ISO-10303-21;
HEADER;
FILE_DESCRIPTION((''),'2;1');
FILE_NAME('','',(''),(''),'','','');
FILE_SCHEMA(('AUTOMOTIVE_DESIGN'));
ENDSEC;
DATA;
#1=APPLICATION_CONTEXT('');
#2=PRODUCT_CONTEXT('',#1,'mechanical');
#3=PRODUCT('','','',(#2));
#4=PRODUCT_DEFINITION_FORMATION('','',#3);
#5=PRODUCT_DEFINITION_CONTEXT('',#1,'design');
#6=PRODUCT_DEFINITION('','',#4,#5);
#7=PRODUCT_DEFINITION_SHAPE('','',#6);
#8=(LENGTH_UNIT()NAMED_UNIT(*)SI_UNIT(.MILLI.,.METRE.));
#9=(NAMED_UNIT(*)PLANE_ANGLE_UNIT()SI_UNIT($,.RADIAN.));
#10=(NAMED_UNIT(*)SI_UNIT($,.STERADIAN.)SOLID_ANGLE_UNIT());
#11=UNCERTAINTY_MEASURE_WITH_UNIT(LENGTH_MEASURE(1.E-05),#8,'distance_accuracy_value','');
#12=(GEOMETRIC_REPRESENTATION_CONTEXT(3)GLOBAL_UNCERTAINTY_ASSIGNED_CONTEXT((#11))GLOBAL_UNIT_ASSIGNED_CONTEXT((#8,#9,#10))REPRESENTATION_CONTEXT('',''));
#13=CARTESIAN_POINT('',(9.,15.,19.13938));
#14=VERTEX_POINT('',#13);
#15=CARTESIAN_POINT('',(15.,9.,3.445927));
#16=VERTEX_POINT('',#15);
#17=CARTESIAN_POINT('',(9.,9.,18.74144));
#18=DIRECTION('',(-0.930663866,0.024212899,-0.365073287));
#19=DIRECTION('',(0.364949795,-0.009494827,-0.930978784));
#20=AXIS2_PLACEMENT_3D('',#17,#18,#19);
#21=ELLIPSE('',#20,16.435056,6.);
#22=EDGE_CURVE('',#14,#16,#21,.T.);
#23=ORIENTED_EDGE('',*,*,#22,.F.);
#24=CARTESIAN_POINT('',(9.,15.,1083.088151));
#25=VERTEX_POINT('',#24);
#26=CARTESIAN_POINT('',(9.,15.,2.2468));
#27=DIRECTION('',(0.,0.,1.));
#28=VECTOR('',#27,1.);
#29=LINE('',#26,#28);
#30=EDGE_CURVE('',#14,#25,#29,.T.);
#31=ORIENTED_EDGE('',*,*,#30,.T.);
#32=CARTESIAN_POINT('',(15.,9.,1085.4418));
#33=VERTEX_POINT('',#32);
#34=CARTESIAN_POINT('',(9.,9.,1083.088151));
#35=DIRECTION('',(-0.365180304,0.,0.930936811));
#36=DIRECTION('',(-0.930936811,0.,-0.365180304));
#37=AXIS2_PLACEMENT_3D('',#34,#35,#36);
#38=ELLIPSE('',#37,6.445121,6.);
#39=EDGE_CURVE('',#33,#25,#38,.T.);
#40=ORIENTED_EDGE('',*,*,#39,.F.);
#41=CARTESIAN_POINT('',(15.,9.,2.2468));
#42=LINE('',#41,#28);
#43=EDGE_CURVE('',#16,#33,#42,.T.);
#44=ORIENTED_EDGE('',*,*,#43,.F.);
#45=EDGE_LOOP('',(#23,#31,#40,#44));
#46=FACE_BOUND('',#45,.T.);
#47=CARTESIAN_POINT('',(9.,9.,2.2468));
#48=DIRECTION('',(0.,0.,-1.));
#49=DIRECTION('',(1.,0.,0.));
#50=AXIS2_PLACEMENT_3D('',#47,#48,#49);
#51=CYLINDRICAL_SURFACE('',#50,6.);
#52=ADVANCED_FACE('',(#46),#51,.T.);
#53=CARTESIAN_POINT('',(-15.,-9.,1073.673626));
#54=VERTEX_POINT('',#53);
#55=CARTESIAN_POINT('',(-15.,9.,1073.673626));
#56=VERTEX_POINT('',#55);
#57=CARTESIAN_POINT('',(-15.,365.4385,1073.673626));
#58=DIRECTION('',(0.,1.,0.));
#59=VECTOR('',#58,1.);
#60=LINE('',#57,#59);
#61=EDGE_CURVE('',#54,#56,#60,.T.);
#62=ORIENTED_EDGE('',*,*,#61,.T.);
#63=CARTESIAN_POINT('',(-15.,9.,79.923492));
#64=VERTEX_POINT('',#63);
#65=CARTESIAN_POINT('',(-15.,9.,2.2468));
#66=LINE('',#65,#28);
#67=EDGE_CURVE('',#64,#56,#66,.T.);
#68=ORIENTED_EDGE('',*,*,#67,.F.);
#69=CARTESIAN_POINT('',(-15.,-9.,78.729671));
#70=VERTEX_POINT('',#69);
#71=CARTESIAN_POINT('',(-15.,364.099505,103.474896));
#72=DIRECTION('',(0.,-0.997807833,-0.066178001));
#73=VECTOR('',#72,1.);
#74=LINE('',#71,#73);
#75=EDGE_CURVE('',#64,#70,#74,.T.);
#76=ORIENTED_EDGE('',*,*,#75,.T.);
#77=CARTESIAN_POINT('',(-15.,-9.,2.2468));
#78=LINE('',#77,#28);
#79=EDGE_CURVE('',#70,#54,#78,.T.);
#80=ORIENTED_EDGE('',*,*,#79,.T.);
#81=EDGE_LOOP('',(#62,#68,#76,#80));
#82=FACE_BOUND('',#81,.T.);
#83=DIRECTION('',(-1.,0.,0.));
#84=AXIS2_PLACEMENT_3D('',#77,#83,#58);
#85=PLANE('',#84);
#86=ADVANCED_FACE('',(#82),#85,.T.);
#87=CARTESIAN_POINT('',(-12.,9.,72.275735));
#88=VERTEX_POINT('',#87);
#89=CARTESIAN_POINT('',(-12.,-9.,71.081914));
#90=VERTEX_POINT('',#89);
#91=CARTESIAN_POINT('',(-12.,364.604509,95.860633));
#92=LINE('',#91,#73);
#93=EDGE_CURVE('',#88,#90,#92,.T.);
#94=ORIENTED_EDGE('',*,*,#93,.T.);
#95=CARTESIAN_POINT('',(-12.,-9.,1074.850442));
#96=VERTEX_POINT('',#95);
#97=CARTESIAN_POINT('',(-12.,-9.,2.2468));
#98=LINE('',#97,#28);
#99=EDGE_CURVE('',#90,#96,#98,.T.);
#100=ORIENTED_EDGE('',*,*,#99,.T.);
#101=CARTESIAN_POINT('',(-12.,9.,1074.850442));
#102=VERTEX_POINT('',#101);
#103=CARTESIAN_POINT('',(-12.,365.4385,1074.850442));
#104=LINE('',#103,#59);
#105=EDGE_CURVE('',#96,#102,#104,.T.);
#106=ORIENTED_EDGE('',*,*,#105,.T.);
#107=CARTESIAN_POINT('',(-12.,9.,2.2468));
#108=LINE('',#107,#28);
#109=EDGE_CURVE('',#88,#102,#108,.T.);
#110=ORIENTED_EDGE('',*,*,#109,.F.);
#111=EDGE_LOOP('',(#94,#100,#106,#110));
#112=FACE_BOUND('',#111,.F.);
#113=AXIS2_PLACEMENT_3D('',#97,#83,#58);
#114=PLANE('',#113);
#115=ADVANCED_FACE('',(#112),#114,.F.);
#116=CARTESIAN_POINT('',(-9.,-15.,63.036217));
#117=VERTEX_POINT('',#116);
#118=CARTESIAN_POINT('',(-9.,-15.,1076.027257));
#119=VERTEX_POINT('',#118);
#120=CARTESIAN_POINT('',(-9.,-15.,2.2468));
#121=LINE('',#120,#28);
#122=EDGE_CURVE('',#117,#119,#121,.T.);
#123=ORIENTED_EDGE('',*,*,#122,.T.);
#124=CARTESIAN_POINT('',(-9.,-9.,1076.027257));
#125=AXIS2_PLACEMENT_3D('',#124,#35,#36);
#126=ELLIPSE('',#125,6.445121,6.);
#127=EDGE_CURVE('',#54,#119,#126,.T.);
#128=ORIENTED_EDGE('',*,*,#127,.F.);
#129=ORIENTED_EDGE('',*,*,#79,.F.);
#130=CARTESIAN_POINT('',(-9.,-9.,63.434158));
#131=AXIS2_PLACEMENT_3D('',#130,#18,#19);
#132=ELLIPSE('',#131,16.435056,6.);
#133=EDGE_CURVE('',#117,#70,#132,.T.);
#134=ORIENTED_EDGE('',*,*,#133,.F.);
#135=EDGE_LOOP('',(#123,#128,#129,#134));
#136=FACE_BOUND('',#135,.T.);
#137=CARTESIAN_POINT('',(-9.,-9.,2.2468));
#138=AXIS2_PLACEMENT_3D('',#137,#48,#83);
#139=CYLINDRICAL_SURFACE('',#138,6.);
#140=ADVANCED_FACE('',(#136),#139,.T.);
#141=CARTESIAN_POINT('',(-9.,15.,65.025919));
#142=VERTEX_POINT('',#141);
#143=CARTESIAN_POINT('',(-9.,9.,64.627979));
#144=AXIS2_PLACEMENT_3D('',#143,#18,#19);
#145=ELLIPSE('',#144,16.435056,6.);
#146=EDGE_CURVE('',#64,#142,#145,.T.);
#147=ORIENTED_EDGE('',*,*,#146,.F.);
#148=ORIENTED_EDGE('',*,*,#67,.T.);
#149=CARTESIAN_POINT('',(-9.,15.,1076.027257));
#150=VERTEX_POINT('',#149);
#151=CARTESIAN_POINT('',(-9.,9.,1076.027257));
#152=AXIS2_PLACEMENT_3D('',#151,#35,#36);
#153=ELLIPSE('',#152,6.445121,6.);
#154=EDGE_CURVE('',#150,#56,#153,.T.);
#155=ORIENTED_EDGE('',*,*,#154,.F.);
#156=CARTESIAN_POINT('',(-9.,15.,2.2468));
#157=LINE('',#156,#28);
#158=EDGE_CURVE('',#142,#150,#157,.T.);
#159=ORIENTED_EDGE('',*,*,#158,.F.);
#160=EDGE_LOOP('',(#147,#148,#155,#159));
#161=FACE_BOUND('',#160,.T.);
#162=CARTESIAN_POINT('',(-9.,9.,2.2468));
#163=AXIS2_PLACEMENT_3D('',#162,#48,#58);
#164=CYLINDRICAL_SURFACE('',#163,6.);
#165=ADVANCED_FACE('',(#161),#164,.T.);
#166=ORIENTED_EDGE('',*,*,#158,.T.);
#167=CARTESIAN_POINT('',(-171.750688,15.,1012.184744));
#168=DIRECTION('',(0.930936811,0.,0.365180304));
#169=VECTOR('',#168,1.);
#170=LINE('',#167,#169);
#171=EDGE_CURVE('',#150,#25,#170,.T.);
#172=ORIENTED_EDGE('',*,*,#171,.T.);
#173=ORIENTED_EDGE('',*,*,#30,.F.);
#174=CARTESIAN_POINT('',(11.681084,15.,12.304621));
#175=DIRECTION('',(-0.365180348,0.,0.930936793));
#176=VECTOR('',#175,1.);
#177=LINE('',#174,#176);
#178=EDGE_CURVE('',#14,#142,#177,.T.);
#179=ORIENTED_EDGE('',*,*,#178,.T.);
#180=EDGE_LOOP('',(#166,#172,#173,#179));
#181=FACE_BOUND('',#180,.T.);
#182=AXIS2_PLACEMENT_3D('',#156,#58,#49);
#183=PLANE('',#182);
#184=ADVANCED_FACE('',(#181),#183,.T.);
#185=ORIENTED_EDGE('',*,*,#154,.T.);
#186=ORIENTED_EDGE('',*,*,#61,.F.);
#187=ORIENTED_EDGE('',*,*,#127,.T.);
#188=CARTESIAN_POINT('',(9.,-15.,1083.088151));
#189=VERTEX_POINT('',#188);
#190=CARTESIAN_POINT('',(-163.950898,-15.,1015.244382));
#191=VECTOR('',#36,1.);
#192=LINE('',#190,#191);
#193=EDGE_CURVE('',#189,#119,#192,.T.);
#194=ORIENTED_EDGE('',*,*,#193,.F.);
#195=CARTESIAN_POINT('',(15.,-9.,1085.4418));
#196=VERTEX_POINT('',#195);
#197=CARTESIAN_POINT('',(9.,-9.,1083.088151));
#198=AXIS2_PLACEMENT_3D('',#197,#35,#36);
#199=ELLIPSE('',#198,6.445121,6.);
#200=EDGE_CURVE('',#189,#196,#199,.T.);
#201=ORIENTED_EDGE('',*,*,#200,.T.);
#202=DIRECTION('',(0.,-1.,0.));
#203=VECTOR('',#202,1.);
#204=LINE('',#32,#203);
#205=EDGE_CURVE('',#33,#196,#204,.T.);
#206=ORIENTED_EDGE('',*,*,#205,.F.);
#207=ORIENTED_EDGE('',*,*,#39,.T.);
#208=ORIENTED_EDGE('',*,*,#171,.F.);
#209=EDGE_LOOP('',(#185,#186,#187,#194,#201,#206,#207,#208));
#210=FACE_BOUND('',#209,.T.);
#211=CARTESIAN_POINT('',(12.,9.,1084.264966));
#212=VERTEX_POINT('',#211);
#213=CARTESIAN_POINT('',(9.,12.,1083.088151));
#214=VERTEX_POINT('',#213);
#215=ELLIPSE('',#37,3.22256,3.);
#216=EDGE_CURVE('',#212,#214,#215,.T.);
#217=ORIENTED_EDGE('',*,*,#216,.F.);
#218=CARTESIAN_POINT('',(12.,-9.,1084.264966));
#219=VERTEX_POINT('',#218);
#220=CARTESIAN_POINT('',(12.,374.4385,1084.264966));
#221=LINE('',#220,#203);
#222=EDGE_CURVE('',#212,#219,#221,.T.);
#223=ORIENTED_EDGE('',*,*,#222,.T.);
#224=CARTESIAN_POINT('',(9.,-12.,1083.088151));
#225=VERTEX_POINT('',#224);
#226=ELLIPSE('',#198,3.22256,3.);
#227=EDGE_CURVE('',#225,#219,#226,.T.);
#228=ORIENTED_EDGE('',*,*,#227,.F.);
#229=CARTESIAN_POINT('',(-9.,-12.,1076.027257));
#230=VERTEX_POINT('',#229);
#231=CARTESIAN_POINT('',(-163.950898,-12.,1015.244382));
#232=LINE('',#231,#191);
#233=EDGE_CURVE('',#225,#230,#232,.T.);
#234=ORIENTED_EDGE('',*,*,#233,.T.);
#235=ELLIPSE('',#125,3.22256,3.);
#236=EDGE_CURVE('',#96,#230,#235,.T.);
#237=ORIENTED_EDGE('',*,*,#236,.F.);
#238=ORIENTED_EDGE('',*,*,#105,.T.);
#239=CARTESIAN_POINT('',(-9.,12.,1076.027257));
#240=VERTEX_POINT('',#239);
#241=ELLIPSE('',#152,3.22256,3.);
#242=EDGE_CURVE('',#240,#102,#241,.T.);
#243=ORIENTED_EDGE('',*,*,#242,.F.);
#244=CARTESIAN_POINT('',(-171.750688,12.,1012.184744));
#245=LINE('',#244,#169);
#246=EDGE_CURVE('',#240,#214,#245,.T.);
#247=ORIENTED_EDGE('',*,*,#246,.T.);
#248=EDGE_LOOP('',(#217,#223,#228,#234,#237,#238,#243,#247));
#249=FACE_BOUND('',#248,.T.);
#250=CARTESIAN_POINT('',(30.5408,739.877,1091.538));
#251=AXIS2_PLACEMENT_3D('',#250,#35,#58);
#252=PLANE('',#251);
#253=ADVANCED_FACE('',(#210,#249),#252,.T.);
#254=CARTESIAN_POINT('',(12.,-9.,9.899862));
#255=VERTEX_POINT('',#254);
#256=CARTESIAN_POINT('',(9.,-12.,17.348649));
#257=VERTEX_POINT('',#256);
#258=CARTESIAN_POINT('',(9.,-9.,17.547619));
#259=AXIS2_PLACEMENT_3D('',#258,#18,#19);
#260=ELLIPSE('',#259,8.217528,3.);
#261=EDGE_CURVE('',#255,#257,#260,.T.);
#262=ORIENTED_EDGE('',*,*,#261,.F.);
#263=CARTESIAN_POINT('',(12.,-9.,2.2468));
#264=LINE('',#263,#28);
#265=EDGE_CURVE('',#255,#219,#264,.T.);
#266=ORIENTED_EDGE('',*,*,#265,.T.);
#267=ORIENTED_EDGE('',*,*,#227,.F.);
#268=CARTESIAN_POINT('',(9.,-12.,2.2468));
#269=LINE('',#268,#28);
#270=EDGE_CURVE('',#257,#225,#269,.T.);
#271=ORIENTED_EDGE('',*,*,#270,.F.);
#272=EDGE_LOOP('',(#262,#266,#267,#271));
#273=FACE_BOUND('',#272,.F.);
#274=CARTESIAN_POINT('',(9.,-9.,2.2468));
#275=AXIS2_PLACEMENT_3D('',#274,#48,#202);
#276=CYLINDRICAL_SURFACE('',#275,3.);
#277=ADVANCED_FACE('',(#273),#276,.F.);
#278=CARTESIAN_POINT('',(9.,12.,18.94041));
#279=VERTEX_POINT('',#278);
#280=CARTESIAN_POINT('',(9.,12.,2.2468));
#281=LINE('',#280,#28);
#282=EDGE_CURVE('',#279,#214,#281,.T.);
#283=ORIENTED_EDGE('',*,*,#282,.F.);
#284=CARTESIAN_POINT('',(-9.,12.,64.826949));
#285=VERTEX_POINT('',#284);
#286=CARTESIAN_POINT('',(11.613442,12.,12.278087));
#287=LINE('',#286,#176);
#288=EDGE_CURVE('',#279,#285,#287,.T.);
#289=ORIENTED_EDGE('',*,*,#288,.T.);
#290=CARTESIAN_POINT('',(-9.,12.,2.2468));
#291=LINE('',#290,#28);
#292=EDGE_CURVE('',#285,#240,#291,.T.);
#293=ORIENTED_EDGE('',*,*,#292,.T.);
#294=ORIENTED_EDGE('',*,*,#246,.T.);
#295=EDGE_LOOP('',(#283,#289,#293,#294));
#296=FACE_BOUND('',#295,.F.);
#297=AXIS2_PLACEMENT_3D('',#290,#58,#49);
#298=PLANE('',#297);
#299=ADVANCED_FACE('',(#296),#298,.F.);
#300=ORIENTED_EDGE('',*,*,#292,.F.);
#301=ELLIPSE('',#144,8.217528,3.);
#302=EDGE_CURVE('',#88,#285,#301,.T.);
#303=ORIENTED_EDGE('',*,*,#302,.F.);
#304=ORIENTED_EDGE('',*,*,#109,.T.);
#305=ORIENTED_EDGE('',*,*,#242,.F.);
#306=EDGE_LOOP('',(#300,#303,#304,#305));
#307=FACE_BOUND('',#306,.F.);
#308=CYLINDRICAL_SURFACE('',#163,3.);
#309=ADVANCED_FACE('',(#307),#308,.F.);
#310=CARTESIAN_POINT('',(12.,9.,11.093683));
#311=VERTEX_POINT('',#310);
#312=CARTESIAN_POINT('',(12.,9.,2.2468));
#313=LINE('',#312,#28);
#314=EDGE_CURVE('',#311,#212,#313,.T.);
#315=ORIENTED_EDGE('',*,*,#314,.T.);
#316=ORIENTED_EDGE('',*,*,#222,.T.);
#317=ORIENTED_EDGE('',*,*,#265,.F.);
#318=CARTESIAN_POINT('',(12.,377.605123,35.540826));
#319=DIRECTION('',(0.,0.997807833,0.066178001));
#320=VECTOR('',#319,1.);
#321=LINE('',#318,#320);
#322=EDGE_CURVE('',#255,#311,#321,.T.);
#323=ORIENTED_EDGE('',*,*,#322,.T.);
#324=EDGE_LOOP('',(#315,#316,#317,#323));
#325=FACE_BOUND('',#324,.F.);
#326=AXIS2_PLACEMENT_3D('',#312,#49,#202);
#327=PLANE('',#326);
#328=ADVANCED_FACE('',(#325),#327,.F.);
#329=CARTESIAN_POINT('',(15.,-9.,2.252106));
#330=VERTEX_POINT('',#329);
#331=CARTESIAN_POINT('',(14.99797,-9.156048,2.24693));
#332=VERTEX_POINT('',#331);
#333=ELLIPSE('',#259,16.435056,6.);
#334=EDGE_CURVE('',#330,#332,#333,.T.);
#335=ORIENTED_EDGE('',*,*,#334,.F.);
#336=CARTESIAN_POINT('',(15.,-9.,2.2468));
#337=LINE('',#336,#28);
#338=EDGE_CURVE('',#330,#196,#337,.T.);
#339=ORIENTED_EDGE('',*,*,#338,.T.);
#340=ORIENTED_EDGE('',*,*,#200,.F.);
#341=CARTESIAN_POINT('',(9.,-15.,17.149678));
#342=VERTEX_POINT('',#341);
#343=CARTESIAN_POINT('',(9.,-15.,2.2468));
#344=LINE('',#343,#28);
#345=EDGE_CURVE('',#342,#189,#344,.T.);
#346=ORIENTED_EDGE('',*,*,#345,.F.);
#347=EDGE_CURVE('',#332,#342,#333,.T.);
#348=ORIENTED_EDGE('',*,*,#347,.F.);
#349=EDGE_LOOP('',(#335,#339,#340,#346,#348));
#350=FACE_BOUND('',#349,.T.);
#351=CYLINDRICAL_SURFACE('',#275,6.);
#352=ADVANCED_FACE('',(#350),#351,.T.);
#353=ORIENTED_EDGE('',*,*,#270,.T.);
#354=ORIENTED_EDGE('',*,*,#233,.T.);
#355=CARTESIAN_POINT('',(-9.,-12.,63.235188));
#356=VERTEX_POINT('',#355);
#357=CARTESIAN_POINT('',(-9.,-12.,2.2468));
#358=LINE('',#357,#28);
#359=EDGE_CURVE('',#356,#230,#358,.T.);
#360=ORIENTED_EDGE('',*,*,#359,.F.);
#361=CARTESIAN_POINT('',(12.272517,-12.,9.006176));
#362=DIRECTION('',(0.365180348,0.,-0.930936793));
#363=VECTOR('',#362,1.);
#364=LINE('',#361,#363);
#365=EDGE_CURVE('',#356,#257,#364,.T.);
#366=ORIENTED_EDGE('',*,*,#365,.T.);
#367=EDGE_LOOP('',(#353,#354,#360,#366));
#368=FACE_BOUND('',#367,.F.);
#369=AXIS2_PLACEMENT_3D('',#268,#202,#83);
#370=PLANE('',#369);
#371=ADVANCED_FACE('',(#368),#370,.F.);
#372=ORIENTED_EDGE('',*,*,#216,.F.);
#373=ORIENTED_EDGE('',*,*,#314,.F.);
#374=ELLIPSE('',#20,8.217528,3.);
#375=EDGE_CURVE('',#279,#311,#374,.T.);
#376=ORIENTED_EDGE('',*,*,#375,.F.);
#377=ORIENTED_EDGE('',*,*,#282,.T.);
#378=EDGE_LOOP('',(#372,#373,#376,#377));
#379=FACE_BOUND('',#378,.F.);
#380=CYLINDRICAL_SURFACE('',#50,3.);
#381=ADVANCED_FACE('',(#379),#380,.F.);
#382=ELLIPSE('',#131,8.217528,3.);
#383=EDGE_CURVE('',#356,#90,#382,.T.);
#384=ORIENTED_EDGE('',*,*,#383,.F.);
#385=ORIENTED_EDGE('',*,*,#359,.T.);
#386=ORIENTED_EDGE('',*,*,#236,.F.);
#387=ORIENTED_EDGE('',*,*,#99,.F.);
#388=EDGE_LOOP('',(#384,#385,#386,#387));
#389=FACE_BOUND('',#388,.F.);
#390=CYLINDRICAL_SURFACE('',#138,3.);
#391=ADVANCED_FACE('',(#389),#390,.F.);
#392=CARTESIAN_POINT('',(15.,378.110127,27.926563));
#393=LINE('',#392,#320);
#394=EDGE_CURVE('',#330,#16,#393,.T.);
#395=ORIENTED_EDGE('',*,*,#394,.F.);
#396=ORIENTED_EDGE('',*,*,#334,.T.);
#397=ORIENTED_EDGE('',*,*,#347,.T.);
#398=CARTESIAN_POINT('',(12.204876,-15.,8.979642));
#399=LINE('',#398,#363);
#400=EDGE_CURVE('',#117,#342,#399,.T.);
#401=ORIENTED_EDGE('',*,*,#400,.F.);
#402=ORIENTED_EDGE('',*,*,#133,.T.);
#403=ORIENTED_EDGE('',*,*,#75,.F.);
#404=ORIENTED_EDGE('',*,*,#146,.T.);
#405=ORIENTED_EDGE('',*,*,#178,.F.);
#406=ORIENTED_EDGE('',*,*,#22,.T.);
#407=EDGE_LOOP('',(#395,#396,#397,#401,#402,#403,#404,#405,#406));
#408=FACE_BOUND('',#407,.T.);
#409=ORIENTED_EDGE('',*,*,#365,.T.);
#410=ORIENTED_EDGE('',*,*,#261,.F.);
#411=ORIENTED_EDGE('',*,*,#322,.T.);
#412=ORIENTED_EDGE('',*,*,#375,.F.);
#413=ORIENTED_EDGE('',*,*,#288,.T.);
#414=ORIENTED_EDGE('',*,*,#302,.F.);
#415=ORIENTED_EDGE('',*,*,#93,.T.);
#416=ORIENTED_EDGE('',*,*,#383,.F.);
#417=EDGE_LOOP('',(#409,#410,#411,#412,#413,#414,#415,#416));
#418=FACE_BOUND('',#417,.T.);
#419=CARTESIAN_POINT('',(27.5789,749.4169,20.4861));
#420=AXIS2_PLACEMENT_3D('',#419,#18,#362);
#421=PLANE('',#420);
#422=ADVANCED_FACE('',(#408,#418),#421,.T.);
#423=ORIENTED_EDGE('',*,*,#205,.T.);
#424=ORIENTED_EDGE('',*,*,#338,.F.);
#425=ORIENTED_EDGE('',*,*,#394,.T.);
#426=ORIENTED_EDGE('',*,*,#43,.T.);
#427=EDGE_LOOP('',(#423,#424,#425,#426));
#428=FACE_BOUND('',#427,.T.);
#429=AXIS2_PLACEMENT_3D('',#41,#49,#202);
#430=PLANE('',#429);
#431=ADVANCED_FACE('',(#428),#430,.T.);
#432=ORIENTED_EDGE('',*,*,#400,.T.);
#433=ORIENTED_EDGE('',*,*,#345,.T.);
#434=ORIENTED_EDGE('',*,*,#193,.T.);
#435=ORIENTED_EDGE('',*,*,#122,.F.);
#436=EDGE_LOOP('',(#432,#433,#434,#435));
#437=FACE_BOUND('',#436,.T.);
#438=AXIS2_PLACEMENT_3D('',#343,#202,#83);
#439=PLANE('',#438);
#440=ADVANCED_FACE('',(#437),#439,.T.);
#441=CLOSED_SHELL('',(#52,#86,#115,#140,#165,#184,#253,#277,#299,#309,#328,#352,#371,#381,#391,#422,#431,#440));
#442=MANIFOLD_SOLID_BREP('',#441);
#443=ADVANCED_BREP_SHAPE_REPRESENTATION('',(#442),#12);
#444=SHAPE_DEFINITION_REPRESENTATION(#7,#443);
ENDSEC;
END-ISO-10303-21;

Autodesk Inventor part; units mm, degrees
ref_plane "Start Plane" through (0, 0, 2.2468) normal (0, 0, 1) x (1, 0, 0)
ref_plane "End Plane" through (0, 0, 1085.4418) normal (0, 0, 1) x (1, 0, 0)
sketch "Sketch" plane through (0, 0, 0) normal (0, 0, 1) x (1, 0, 0)
  line L0 (-15, -9) -> (-15, 9)
  line L1 (-9, 15) -> (9, 15)
  line L2 (15, 9) -> (15, -9)
  line L3 (9, -15) -> (-9, -15)
  arc A0 (-15, -9) -> (-9, -15) centre (-9, -9) ccw
  arc A1 (-9, 15) -> (-15, 9) centre (-9, 9) ccw
  arc A2 (15, 9) -> (9, 15) centre (9, 9) ccw
  arc A3 (9, -15) -> (15, -9) centre (9, -9) ccw
  arc A4 (-9, 12) -> (-12, 9) centre (-9, 9) ccw
  line L4 (-9, 12) -> (9, 12)
  arc A5 (12, 9) -> (9, 12) centre (9, 9) ccw
  line L5 (12, 9) -> (12, -9)
  arc A6 (9, -12) -> (12, -9) centre (9, -9) ccw
  line L6 (9, -12) -> (-9, -12)
  arc A7 (-12, -9) -> (-9, -12) centre (-9, -9) ccw
  line L7 (-12, -9) -> (-12, 9)
  line L8 (0, 22.7397) -> (0, -22.7397) construction
  line L9 (-22.7397, 0) -> (22.7397, 0) construction
  dimension "d7" = 6
  dimension "d10" = 30
  dimension "d11" = 30
  dimension "d12" = 3
  dimension "d15" = 15
  dimension "d16" = 15
extrude "Body" add sketch "Sketch" along normal up to surface (1083.195 mm away) from surface at 2.2468
sketch "Sketch3" plane through (0, 0, 0) normal (0, 0, 1) x (1, 0, 0)
  line L0 (0, 0) -> (10, 0)
ref_plane "Work Plane3" through (0, 0, 0) normal (0, -1, 0) x (1, 0, 0)
ref_plane "Work Plane4" through (27.5789, 749.4169, 20.4861) normal (-0.9306639, 0.0242129, -0.3650733) x (-0.3641499, 0.0354908, 0.9306639)
split "Split1" plane through (27.5789, 749.4169, 20.4861) removes the side toward (-0.9306639, 0.0242129, -0.3650733)
ref_plane "Work Plane5" through (14.1628, 8.6342, 5.5557) normal (-0.9306639, 0.0242129, -0.3650733) x (-0.3641499, 0.0354908, 0.9306639)
split "Split2" plane through (14.1628, 8.6342, 5.5557) removes the side toward (-0.9306639, 0.0242129, -0.3650733)
ref_plane "Work Plane6" through (30.5408, 739.877, 1091.538) normal (-0.3651803, 0, 0.9309368) x (0.9309368, 0, 0.3651803)
split "Split3" plane through (30.5408, 739.877, 1091.538) removes the side toward (-0.3651803, 0, 0.9309368)
sketch "Sketch4" plane through (0, 0, 0) normal (0, -1, 0) x (1, 0, 0)
  line L0 (-2, 2.2468) -> (12, 2.2468) projected
  line L1 (-2, 1085.4418) -> (12, 1085.4418) projected
  dimension "d18" = 1083.195
equation "\"d7\" = G_IR"
equation "\"d10\" = G_H"
equation "\"d11\" = G_W"
equation "\"d12\" = G_T"
equation "\"d15\" = 0.5 * d10"
equation "\"d16\" = 0.5 * d11"
equation "\"d3\" = G_L"
equation "\"G_W\" = 30"
equation "\"G_H\" = 30"
equation "\"G_T\" = 3"
equation "\"G_IR\" = 6"
equation "\"G_L\" = 1083.19501"
equation "\"G_OFFSET_START\" = -2.24677"
equation "\"G_OFFSET_END\" = -10.22872"
equation "\"d13\" = -G_OFFSET_START"
equation "\"d14\" = G_OFFSET_END + B_L"
equation "\"B_L\" = 1095.67051"
properties part number "DIN EN 10219-2 - 30 x 30 x 3  - 1083.2" material "Steel, Mild"
